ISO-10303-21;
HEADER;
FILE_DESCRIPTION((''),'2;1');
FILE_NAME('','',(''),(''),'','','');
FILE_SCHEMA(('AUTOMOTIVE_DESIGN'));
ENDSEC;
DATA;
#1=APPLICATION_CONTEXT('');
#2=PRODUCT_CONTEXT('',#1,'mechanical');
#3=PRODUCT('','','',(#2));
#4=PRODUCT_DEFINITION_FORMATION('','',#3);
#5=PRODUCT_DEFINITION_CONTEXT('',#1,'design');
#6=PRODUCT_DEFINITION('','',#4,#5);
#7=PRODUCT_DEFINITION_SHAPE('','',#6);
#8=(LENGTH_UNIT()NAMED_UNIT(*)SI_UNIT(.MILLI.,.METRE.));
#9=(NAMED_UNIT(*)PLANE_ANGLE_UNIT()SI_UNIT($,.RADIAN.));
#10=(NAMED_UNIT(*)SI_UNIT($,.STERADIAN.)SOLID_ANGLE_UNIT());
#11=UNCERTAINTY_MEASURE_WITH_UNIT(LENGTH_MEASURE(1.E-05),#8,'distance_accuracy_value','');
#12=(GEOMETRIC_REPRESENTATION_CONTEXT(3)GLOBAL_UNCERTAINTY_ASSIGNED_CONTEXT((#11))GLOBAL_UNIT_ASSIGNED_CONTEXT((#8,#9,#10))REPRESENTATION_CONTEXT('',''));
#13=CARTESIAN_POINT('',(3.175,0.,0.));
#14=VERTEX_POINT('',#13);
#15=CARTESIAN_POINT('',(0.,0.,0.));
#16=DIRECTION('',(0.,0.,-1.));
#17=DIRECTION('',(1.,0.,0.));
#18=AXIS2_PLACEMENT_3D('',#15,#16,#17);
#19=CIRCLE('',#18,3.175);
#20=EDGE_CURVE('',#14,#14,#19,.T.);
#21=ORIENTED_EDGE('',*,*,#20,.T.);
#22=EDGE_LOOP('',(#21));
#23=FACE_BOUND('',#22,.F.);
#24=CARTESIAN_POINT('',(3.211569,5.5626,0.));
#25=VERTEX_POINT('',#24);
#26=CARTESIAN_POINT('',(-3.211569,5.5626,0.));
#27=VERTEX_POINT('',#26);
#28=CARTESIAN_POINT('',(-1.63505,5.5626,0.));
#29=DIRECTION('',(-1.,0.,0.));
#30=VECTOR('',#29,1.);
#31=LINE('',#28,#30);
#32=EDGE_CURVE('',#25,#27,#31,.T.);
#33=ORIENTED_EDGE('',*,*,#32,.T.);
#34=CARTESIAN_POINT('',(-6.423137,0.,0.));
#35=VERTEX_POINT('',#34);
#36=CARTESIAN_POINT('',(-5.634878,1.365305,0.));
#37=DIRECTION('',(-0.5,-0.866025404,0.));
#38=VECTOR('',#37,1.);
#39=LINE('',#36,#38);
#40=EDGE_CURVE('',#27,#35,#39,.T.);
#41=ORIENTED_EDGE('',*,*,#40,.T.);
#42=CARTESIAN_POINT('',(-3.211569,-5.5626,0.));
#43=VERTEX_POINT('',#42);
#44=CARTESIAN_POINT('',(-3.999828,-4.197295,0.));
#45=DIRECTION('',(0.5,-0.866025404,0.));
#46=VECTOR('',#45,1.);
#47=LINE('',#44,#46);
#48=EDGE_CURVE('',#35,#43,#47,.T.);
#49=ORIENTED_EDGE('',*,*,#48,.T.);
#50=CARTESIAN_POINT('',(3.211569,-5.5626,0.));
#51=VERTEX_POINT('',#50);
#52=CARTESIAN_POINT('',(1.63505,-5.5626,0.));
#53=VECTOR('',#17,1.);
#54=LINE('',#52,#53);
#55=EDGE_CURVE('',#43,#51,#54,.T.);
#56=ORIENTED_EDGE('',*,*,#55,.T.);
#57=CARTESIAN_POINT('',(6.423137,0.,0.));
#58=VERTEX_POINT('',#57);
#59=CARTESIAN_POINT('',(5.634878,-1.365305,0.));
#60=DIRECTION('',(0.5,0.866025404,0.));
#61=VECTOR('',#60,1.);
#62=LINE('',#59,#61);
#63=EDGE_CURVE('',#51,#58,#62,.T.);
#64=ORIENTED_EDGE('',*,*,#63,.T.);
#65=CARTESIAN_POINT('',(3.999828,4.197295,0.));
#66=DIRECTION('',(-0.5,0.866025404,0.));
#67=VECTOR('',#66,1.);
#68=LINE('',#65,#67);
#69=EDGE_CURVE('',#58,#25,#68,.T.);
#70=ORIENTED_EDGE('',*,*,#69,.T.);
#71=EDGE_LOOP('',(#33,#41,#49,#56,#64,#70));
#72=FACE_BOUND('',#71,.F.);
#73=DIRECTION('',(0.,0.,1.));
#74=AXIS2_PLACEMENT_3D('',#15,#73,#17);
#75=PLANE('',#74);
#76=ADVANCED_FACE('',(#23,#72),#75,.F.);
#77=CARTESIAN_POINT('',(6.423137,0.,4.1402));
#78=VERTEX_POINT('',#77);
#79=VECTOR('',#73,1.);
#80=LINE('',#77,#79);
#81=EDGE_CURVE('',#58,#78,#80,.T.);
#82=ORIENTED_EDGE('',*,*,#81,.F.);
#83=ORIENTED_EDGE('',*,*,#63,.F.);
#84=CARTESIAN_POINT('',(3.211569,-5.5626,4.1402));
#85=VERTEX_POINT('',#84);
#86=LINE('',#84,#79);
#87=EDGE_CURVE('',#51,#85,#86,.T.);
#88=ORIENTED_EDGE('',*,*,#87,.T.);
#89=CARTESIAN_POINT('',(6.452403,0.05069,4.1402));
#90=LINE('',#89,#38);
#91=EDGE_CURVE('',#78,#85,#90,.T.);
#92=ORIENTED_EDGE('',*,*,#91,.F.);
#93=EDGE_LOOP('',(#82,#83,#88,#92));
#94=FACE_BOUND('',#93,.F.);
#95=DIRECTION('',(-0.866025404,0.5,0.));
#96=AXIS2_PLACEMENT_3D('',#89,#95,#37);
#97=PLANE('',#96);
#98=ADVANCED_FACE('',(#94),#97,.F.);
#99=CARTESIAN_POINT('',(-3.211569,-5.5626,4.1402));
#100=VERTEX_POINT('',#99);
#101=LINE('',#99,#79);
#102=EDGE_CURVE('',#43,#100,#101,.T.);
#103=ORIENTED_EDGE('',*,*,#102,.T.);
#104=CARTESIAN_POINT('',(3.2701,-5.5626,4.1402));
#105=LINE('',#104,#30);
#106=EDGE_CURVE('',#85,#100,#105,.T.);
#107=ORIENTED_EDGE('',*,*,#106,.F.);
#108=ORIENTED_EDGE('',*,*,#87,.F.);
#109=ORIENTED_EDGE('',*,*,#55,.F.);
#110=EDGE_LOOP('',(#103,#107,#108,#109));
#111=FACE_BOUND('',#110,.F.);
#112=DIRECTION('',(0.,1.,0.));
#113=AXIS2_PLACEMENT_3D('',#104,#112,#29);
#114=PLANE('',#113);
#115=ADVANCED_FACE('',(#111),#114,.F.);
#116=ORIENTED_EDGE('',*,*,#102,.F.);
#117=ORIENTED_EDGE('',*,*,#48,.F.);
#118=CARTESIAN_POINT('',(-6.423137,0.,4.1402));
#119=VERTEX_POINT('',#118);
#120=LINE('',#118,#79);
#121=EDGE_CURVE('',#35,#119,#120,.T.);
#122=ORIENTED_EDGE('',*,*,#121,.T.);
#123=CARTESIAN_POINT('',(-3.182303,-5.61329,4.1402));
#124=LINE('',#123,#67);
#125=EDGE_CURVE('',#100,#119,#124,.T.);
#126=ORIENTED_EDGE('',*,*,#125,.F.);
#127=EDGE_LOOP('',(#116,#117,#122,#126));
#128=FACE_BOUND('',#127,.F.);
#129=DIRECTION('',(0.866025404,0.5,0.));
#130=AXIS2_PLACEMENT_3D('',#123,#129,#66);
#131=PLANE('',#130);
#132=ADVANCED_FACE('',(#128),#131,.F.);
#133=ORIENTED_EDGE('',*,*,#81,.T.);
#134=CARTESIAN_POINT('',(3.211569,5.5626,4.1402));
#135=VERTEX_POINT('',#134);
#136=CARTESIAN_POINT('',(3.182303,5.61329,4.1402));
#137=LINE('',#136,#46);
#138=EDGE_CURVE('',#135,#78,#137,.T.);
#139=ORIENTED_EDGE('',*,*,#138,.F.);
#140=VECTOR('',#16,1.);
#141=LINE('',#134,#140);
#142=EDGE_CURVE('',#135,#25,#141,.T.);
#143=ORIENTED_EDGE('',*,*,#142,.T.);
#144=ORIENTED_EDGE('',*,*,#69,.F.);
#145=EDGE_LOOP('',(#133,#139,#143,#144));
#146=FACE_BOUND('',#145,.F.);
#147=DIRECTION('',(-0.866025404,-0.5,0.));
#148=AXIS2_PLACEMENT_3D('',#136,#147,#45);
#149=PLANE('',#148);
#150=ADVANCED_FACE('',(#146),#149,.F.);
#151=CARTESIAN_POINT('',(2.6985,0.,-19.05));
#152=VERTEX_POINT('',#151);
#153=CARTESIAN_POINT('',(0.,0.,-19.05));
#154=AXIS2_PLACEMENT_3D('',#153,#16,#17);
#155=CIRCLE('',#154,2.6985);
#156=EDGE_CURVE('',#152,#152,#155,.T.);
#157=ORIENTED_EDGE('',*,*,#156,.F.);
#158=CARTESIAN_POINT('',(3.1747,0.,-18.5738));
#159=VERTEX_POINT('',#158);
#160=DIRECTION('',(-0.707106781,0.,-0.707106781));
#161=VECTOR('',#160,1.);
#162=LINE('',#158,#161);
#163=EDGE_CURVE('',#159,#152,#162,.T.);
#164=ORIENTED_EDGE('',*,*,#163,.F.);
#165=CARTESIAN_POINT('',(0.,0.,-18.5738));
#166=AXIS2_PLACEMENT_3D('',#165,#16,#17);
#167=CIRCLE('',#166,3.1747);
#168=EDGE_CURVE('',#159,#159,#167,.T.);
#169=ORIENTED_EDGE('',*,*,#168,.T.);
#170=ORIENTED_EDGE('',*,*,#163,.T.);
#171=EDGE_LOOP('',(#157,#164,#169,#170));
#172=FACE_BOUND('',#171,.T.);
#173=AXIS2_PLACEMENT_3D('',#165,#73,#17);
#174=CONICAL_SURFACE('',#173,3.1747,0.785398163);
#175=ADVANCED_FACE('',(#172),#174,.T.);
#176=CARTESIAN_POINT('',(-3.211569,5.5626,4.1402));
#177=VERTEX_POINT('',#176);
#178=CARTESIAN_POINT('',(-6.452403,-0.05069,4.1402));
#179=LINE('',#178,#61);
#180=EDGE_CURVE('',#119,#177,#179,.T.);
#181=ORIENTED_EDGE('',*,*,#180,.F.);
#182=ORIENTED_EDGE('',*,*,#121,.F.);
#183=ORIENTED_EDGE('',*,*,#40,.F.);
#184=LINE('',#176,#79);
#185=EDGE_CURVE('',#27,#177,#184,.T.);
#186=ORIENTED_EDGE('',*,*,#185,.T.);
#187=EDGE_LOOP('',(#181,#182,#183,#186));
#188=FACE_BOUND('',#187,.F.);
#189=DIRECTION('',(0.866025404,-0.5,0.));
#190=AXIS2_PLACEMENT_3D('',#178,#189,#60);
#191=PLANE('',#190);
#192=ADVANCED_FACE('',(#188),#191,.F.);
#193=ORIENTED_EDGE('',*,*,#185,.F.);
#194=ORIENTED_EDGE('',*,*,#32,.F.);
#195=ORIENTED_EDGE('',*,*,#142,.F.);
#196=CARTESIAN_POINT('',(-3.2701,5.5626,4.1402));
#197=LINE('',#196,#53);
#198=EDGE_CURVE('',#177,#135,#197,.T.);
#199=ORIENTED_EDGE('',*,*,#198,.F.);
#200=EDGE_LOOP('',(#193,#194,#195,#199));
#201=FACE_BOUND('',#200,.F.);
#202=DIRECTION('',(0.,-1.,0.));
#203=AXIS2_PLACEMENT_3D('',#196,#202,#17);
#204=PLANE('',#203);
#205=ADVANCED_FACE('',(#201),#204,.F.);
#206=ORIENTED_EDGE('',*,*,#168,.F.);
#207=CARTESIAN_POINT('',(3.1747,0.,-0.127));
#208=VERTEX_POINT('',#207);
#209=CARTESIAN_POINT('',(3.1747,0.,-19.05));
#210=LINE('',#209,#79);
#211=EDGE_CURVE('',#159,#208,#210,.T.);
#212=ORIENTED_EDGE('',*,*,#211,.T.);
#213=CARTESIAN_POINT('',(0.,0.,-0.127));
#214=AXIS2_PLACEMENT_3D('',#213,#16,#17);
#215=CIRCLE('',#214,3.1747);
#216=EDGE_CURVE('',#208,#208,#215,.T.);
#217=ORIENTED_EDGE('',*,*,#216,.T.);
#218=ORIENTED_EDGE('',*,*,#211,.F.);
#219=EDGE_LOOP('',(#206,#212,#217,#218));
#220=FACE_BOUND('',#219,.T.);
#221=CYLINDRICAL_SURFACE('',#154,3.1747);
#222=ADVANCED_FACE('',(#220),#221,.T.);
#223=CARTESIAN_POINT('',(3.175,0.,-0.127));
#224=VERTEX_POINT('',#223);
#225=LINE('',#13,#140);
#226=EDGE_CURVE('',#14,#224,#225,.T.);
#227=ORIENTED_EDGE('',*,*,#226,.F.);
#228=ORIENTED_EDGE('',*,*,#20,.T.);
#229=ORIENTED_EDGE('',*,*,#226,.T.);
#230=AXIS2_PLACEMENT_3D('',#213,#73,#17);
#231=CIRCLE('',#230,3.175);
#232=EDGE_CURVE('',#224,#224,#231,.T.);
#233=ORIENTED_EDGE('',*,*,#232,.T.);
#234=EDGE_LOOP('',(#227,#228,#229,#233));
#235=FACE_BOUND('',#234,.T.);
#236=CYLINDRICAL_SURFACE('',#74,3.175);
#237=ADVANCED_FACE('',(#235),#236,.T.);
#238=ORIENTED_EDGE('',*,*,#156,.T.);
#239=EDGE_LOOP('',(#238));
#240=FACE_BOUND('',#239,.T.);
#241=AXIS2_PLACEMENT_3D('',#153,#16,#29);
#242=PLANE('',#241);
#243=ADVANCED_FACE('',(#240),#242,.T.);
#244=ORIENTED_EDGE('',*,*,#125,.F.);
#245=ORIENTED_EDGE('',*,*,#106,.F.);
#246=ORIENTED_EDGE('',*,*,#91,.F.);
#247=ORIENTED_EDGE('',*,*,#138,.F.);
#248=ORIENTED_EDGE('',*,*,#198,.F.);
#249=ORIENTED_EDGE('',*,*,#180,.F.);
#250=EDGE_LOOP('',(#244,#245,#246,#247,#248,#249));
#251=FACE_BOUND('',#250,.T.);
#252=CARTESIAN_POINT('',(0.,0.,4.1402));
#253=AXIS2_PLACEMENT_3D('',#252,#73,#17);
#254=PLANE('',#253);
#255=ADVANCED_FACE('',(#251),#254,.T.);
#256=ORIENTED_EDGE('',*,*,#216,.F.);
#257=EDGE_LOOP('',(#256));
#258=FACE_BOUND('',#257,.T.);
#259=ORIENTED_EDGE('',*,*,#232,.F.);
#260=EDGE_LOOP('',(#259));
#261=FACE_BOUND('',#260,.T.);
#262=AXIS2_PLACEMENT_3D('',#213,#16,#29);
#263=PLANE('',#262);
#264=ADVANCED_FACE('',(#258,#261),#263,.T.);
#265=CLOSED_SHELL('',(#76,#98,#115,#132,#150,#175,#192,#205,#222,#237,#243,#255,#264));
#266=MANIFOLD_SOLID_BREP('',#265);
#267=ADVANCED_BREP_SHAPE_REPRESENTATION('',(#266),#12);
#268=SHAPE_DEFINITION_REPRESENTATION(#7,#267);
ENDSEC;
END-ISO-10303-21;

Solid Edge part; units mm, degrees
sketch "Sketch1" plane through (0, 0, 0) normal (0, 0, 1) x (1, 0, 0)
  circle A0 centre (0, 0) radius 6.4526
  dimension "D1" = 12.9052
extrude "Protrusion1" add sketch "Sketch1" along normal blind 4.1402
sketch "Sketch2" plane through (0, 0, 0) normal (0, 0, -1) x (1, 0, 0)
  circle A0 centre (0, 0) radius 3.175
extrude "Protrusion2" add sketch "Sketch2" along normal blind 19.05
sketch "Sketch3" plane through (0, 0, -19.05) normal (0, 0, -1) x (1, 0, 0)
  circle A0 centre (0, 0) radius 3.1747
extrude "Cutout1" cut sketch "Sketch3" against normal blind 18.923 flip side to cut
chamfer "Chamfer_1" distance 0.4762 angle 45 1 edges at (-3.1747, 0, -19.05)
sketch "Sketch4" plane through (0, 0, 4.1402) normal (0, 0, 1) x (1, 0, 0)
  line L0 (-3.2701, 5.5626) -> (3.2701, 5.5626)
  dimension "D1" = 11.1252
extrude "Cutout2" cut sketch "Sketch4" against normal up to next material side at (0, 5.6126, 4.1402)
pattern_circular "Pattern1" count 6 over 360 about axis through (0, 0, 4.1402) along (0, 0, 1) of "Cutout2"
properties part number "24101939"
